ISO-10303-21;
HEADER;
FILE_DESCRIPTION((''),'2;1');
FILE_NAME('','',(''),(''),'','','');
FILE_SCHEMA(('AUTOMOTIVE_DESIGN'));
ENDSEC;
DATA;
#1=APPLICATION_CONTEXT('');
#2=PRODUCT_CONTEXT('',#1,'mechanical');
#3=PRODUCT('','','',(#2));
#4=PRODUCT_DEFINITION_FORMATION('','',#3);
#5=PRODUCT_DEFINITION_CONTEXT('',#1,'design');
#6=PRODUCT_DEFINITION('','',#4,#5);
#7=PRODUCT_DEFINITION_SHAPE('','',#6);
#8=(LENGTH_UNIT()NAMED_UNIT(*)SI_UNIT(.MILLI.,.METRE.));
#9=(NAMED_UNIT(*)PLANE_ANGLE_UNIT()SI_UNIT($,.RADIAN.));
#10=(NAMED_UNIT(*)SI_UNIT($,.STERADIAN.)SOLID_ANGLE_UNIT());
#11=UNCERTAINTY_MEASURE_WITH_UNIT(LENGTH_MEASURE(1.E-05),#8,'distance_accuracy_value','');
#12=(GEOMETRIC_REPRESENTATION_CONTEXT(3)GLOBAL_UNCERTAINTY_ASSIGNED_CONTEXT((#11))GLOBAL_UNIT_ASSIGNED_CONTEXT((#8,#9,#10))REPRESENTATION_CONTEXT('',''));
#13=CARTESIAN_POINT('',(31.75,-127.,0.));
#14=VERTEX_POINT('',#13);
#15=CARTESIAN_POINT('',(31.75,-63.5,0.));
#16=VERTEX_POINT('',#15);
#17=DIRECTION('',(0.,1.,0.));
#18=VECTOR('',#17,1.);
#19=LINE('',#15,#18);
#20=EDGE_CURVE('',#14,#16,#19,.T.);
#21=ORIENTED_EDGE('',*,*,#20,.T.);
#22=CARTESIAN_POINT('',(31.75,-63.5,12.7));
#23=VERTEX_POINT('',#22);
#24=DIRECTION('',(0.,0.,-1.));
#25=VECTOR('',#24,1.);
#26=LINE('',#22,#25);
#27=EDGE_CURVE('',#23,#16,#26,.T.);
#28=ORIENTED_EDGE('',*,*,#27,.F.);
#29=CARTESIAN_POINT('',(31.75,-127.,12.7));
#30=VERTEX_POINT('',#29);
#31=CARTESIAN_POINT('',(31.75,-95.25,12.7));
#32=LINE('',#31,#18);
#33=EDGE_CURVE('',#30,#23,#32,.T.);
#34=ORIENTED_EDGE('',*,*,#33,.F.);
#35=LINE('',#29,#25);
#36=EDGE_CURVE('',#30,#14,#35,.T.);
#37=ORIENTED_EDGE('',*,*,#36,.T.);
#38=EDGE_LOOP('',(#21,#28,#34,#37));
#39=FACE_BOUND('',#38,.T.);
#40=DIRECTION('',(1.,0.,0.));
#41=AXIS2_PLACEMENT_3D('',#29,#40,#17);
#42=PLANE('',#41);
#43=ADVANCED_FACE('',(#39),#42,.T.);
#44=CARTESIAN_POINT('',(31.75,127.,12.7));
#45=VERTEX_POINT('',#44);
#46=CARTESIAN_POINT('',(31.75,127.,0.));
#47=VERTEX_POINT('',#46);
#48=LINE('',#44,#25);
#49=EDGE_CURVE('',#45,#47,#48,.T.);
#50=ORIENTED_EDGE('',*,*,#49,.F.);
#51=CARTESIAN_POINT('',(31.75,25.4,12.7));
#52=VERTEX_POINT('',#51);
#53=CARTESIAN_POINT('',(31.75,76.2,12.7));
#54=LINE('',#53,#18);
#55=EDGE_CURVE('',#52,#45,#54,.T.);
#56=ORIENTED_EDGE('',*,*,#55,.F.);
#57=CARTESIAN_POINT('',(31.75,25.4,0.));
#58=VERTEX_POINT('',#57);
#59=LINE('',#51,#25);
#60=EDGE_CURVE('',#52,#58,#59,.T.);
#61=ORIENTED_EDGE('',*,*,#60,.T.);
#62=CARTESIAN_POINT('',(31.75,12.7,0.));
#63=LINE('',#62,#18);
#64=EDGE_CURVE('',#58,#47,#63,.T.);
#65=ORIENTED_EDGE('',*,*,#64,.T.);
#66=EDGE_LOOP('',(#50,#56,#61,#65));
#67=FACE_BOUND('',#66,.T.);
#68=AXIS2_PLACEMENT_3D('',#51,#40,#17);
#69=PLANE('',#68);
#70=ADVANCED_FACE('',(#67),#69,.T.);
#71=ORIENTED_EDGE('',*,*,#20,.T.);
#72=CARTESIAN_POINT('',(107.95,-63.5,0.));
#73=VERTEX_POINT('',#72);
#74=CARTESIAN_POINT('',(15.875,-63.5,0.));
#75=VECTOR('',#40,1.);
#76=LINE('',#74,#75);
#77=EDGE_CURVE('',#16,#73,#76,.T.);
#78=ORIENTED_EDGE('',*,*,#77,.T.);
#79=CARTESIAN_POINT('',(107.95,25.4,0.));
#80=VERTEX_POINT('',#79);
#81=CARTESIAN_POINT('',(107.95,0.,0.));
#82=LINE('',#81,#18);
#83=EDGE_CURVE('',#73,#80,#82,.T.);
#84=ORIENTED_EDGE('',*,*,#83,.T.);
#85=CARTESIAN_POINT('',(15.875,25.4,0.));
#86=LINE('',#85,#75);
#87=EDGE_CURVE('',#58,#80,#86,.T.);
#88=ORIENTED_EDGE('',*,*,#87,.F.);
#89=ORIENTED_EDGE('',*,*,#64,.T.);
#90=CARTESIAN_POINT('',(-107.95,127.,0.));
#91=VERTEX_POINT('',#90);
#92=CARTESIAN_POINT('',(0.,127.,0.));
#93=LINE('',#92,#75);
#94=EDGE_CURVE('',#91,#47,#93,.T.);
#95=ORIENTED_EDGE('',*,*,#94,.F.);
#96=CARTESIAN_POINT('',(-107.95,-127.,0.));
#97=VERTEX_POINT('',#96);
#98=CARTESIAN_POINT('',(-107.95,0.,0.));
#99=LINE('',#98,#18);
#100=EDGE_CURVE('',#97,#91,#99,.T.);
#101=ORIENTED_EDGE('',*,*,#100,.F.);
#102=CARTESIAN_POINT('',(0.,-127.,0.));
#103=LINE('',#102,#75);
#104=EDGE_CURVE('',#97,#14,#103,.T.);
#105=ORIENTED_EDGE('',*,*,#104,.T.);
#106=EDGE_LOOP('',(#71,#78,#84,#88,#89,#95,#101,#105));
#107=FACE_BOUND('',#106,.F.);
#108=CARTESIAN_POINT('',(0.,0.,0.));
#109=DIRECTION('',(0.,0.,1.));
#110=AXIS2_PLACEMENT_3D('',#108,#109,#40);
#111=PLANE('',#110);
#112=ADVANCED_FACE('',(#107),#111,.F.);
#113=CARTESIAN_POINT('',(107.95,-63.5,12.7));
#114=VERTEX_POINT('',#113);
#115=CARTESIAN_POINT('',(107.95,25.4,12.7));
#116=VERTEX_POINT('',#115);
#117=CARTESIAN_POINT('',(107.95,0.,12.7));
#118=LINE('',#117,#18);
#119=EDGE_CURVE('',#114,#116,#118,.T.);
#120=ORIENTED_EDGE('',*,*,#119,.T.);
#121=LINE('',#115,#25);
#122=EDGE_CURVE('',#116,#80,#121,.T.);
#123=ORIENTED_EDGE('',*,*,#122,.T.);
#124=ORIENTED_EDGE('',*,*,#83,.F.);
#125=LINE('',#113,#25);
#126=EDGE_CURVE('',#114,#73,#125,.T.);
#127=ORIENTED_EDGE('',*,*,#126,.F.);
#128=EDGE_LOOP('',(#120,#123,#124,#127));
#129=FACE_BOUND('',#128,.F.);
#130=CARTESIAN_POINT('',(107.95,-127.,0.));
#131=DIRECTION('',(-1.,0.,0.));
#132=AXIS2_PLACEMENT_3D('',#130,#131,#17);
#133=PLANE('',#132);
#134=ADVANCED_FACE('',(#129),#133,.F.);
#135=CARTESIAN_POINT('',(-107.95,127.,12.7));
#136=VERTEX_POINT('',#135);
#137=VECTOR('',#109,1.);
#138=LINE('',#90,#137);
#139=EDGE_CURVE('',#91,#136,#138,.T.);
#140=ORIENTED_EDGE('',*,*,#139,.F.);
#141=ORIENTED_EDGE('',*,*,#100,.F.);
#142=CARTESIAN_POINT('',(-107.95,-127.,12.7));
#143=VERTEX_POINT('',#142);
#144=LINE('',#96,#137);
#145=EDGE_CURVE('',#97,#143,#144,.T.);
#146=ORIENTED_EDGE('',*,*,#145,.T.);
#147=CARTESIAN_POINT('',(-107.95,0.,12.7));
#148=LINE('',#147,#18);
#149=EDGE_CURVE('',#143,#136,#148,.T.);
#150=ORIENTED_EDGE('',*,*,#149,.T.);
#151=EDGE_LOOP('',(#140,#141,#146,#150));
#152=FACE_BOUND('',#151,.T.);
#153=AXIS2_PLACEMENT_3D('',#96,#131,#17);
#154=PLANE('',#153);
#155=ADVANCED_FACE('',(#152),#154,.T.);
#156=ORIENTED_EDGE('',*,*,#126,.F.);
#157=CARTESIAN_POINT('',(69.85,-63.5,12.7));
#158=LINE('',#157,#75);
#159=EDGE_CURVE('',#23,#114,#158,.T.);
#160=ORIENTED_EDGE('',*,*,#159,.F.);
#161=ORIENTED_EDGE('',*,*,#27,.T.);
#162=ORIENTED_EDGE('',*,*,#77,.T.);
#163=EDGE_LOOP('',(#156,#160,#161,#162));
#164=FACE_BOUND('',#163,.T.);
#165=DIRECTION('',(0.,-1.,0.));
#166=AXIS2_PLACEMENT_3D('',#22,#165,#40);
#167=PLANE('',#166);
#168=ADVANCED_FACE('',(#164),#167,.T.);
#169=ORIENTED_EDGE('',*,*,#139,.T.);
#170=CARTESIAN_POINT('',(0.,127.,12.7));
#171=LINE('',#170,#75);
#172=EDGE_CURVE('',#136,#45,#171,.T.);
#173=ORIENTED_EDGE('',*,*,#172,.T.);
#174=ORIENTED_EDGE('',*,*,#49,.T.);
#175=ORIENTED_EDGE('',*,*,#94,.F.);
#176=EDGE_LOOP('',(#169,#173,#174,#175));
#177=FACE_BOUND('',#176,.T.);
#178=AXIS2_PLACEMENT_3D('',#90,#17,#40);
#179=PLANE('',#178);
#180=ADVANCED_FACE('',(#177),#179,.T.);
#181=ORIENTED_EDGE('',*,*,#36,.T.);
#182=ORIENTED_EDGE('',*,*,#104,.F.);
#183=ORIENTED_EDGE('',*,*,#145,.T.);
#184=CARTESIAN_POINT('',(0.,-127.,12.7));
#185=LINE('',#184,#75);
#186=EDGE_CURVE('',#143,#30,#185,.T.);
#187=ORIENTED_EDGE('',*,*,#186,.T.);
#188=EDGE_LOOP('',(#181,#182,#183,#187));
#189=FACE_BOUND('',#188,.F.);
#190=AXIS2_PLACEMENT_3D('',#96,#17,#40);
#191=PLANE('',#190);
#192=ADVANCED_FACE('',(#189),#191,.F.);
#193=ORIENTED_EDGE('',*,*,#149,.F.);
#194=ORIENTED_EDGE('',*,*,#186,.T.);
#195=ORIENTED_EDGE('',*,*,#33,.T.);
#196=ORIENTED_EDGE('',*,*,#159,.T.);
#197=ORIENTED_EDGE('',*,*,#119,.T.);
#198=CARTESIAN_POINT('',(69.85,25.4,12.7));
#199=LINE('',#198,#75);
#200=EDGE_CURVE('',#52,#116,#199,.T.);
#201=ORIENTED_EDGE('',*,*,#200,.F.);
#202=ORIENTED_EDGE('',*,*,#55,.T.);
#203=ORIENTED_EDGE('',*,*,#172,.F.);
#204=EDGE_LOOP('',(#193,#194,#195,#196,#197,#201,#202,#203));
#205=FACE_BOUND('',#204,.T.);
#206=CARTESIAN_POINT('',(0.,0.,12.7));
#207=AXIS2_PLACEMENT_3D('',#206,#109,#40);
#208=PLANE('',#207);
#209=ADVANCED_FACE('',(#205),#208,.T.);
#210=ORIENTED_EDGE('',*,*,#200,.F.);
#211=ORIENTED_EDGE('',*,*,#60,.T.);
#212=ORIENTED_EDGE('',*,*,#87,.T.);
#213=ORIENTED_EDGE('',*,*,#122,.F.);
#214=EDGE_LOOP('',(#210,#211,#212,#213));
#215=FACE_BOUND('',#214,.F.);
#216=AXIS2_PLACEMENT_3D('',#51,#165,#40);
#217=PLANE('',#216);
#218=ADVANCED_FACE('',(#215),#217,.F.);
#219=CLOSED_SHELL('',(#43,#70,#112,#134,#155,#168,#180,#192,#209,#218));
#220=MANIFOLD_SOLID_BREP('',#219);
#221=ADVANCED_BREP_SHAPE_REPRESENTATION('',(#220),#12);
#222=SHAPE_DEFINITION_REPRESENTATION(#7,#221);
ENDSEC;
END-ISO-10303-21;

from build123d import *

# Parameters (mm, degrees)
F0_W     = 215.9
F0_H     = 254
F1_DEPTH = 12.7
F3_W     = 76.2
F3_H     = 101.6
F3_H_2   = 63.5
F4_DEPTH = 12.701


with BuildPart() as f1:
    # F0 (on Top) → F1 (new body)
    with BuildSketch(Plane.XY):
        Rectangle(F0_W, F0_H)
    extrude(amount=F1_DEPTH)

    # F3 (on face) → F4 (cut, through all)
    with BuildSketch(Plane.XY.offset(12.7)):
        with Locations((69.85, 76.2)):
            Rectangle(F3_W, F3_H)
        with Locations((69.85, -95.25)):
            Rectangle(F3_W, F3_H_2)
    extrude(amount=-F4_DEPTH, mode=Mode.SUBTRACT)


solid = f1.part
